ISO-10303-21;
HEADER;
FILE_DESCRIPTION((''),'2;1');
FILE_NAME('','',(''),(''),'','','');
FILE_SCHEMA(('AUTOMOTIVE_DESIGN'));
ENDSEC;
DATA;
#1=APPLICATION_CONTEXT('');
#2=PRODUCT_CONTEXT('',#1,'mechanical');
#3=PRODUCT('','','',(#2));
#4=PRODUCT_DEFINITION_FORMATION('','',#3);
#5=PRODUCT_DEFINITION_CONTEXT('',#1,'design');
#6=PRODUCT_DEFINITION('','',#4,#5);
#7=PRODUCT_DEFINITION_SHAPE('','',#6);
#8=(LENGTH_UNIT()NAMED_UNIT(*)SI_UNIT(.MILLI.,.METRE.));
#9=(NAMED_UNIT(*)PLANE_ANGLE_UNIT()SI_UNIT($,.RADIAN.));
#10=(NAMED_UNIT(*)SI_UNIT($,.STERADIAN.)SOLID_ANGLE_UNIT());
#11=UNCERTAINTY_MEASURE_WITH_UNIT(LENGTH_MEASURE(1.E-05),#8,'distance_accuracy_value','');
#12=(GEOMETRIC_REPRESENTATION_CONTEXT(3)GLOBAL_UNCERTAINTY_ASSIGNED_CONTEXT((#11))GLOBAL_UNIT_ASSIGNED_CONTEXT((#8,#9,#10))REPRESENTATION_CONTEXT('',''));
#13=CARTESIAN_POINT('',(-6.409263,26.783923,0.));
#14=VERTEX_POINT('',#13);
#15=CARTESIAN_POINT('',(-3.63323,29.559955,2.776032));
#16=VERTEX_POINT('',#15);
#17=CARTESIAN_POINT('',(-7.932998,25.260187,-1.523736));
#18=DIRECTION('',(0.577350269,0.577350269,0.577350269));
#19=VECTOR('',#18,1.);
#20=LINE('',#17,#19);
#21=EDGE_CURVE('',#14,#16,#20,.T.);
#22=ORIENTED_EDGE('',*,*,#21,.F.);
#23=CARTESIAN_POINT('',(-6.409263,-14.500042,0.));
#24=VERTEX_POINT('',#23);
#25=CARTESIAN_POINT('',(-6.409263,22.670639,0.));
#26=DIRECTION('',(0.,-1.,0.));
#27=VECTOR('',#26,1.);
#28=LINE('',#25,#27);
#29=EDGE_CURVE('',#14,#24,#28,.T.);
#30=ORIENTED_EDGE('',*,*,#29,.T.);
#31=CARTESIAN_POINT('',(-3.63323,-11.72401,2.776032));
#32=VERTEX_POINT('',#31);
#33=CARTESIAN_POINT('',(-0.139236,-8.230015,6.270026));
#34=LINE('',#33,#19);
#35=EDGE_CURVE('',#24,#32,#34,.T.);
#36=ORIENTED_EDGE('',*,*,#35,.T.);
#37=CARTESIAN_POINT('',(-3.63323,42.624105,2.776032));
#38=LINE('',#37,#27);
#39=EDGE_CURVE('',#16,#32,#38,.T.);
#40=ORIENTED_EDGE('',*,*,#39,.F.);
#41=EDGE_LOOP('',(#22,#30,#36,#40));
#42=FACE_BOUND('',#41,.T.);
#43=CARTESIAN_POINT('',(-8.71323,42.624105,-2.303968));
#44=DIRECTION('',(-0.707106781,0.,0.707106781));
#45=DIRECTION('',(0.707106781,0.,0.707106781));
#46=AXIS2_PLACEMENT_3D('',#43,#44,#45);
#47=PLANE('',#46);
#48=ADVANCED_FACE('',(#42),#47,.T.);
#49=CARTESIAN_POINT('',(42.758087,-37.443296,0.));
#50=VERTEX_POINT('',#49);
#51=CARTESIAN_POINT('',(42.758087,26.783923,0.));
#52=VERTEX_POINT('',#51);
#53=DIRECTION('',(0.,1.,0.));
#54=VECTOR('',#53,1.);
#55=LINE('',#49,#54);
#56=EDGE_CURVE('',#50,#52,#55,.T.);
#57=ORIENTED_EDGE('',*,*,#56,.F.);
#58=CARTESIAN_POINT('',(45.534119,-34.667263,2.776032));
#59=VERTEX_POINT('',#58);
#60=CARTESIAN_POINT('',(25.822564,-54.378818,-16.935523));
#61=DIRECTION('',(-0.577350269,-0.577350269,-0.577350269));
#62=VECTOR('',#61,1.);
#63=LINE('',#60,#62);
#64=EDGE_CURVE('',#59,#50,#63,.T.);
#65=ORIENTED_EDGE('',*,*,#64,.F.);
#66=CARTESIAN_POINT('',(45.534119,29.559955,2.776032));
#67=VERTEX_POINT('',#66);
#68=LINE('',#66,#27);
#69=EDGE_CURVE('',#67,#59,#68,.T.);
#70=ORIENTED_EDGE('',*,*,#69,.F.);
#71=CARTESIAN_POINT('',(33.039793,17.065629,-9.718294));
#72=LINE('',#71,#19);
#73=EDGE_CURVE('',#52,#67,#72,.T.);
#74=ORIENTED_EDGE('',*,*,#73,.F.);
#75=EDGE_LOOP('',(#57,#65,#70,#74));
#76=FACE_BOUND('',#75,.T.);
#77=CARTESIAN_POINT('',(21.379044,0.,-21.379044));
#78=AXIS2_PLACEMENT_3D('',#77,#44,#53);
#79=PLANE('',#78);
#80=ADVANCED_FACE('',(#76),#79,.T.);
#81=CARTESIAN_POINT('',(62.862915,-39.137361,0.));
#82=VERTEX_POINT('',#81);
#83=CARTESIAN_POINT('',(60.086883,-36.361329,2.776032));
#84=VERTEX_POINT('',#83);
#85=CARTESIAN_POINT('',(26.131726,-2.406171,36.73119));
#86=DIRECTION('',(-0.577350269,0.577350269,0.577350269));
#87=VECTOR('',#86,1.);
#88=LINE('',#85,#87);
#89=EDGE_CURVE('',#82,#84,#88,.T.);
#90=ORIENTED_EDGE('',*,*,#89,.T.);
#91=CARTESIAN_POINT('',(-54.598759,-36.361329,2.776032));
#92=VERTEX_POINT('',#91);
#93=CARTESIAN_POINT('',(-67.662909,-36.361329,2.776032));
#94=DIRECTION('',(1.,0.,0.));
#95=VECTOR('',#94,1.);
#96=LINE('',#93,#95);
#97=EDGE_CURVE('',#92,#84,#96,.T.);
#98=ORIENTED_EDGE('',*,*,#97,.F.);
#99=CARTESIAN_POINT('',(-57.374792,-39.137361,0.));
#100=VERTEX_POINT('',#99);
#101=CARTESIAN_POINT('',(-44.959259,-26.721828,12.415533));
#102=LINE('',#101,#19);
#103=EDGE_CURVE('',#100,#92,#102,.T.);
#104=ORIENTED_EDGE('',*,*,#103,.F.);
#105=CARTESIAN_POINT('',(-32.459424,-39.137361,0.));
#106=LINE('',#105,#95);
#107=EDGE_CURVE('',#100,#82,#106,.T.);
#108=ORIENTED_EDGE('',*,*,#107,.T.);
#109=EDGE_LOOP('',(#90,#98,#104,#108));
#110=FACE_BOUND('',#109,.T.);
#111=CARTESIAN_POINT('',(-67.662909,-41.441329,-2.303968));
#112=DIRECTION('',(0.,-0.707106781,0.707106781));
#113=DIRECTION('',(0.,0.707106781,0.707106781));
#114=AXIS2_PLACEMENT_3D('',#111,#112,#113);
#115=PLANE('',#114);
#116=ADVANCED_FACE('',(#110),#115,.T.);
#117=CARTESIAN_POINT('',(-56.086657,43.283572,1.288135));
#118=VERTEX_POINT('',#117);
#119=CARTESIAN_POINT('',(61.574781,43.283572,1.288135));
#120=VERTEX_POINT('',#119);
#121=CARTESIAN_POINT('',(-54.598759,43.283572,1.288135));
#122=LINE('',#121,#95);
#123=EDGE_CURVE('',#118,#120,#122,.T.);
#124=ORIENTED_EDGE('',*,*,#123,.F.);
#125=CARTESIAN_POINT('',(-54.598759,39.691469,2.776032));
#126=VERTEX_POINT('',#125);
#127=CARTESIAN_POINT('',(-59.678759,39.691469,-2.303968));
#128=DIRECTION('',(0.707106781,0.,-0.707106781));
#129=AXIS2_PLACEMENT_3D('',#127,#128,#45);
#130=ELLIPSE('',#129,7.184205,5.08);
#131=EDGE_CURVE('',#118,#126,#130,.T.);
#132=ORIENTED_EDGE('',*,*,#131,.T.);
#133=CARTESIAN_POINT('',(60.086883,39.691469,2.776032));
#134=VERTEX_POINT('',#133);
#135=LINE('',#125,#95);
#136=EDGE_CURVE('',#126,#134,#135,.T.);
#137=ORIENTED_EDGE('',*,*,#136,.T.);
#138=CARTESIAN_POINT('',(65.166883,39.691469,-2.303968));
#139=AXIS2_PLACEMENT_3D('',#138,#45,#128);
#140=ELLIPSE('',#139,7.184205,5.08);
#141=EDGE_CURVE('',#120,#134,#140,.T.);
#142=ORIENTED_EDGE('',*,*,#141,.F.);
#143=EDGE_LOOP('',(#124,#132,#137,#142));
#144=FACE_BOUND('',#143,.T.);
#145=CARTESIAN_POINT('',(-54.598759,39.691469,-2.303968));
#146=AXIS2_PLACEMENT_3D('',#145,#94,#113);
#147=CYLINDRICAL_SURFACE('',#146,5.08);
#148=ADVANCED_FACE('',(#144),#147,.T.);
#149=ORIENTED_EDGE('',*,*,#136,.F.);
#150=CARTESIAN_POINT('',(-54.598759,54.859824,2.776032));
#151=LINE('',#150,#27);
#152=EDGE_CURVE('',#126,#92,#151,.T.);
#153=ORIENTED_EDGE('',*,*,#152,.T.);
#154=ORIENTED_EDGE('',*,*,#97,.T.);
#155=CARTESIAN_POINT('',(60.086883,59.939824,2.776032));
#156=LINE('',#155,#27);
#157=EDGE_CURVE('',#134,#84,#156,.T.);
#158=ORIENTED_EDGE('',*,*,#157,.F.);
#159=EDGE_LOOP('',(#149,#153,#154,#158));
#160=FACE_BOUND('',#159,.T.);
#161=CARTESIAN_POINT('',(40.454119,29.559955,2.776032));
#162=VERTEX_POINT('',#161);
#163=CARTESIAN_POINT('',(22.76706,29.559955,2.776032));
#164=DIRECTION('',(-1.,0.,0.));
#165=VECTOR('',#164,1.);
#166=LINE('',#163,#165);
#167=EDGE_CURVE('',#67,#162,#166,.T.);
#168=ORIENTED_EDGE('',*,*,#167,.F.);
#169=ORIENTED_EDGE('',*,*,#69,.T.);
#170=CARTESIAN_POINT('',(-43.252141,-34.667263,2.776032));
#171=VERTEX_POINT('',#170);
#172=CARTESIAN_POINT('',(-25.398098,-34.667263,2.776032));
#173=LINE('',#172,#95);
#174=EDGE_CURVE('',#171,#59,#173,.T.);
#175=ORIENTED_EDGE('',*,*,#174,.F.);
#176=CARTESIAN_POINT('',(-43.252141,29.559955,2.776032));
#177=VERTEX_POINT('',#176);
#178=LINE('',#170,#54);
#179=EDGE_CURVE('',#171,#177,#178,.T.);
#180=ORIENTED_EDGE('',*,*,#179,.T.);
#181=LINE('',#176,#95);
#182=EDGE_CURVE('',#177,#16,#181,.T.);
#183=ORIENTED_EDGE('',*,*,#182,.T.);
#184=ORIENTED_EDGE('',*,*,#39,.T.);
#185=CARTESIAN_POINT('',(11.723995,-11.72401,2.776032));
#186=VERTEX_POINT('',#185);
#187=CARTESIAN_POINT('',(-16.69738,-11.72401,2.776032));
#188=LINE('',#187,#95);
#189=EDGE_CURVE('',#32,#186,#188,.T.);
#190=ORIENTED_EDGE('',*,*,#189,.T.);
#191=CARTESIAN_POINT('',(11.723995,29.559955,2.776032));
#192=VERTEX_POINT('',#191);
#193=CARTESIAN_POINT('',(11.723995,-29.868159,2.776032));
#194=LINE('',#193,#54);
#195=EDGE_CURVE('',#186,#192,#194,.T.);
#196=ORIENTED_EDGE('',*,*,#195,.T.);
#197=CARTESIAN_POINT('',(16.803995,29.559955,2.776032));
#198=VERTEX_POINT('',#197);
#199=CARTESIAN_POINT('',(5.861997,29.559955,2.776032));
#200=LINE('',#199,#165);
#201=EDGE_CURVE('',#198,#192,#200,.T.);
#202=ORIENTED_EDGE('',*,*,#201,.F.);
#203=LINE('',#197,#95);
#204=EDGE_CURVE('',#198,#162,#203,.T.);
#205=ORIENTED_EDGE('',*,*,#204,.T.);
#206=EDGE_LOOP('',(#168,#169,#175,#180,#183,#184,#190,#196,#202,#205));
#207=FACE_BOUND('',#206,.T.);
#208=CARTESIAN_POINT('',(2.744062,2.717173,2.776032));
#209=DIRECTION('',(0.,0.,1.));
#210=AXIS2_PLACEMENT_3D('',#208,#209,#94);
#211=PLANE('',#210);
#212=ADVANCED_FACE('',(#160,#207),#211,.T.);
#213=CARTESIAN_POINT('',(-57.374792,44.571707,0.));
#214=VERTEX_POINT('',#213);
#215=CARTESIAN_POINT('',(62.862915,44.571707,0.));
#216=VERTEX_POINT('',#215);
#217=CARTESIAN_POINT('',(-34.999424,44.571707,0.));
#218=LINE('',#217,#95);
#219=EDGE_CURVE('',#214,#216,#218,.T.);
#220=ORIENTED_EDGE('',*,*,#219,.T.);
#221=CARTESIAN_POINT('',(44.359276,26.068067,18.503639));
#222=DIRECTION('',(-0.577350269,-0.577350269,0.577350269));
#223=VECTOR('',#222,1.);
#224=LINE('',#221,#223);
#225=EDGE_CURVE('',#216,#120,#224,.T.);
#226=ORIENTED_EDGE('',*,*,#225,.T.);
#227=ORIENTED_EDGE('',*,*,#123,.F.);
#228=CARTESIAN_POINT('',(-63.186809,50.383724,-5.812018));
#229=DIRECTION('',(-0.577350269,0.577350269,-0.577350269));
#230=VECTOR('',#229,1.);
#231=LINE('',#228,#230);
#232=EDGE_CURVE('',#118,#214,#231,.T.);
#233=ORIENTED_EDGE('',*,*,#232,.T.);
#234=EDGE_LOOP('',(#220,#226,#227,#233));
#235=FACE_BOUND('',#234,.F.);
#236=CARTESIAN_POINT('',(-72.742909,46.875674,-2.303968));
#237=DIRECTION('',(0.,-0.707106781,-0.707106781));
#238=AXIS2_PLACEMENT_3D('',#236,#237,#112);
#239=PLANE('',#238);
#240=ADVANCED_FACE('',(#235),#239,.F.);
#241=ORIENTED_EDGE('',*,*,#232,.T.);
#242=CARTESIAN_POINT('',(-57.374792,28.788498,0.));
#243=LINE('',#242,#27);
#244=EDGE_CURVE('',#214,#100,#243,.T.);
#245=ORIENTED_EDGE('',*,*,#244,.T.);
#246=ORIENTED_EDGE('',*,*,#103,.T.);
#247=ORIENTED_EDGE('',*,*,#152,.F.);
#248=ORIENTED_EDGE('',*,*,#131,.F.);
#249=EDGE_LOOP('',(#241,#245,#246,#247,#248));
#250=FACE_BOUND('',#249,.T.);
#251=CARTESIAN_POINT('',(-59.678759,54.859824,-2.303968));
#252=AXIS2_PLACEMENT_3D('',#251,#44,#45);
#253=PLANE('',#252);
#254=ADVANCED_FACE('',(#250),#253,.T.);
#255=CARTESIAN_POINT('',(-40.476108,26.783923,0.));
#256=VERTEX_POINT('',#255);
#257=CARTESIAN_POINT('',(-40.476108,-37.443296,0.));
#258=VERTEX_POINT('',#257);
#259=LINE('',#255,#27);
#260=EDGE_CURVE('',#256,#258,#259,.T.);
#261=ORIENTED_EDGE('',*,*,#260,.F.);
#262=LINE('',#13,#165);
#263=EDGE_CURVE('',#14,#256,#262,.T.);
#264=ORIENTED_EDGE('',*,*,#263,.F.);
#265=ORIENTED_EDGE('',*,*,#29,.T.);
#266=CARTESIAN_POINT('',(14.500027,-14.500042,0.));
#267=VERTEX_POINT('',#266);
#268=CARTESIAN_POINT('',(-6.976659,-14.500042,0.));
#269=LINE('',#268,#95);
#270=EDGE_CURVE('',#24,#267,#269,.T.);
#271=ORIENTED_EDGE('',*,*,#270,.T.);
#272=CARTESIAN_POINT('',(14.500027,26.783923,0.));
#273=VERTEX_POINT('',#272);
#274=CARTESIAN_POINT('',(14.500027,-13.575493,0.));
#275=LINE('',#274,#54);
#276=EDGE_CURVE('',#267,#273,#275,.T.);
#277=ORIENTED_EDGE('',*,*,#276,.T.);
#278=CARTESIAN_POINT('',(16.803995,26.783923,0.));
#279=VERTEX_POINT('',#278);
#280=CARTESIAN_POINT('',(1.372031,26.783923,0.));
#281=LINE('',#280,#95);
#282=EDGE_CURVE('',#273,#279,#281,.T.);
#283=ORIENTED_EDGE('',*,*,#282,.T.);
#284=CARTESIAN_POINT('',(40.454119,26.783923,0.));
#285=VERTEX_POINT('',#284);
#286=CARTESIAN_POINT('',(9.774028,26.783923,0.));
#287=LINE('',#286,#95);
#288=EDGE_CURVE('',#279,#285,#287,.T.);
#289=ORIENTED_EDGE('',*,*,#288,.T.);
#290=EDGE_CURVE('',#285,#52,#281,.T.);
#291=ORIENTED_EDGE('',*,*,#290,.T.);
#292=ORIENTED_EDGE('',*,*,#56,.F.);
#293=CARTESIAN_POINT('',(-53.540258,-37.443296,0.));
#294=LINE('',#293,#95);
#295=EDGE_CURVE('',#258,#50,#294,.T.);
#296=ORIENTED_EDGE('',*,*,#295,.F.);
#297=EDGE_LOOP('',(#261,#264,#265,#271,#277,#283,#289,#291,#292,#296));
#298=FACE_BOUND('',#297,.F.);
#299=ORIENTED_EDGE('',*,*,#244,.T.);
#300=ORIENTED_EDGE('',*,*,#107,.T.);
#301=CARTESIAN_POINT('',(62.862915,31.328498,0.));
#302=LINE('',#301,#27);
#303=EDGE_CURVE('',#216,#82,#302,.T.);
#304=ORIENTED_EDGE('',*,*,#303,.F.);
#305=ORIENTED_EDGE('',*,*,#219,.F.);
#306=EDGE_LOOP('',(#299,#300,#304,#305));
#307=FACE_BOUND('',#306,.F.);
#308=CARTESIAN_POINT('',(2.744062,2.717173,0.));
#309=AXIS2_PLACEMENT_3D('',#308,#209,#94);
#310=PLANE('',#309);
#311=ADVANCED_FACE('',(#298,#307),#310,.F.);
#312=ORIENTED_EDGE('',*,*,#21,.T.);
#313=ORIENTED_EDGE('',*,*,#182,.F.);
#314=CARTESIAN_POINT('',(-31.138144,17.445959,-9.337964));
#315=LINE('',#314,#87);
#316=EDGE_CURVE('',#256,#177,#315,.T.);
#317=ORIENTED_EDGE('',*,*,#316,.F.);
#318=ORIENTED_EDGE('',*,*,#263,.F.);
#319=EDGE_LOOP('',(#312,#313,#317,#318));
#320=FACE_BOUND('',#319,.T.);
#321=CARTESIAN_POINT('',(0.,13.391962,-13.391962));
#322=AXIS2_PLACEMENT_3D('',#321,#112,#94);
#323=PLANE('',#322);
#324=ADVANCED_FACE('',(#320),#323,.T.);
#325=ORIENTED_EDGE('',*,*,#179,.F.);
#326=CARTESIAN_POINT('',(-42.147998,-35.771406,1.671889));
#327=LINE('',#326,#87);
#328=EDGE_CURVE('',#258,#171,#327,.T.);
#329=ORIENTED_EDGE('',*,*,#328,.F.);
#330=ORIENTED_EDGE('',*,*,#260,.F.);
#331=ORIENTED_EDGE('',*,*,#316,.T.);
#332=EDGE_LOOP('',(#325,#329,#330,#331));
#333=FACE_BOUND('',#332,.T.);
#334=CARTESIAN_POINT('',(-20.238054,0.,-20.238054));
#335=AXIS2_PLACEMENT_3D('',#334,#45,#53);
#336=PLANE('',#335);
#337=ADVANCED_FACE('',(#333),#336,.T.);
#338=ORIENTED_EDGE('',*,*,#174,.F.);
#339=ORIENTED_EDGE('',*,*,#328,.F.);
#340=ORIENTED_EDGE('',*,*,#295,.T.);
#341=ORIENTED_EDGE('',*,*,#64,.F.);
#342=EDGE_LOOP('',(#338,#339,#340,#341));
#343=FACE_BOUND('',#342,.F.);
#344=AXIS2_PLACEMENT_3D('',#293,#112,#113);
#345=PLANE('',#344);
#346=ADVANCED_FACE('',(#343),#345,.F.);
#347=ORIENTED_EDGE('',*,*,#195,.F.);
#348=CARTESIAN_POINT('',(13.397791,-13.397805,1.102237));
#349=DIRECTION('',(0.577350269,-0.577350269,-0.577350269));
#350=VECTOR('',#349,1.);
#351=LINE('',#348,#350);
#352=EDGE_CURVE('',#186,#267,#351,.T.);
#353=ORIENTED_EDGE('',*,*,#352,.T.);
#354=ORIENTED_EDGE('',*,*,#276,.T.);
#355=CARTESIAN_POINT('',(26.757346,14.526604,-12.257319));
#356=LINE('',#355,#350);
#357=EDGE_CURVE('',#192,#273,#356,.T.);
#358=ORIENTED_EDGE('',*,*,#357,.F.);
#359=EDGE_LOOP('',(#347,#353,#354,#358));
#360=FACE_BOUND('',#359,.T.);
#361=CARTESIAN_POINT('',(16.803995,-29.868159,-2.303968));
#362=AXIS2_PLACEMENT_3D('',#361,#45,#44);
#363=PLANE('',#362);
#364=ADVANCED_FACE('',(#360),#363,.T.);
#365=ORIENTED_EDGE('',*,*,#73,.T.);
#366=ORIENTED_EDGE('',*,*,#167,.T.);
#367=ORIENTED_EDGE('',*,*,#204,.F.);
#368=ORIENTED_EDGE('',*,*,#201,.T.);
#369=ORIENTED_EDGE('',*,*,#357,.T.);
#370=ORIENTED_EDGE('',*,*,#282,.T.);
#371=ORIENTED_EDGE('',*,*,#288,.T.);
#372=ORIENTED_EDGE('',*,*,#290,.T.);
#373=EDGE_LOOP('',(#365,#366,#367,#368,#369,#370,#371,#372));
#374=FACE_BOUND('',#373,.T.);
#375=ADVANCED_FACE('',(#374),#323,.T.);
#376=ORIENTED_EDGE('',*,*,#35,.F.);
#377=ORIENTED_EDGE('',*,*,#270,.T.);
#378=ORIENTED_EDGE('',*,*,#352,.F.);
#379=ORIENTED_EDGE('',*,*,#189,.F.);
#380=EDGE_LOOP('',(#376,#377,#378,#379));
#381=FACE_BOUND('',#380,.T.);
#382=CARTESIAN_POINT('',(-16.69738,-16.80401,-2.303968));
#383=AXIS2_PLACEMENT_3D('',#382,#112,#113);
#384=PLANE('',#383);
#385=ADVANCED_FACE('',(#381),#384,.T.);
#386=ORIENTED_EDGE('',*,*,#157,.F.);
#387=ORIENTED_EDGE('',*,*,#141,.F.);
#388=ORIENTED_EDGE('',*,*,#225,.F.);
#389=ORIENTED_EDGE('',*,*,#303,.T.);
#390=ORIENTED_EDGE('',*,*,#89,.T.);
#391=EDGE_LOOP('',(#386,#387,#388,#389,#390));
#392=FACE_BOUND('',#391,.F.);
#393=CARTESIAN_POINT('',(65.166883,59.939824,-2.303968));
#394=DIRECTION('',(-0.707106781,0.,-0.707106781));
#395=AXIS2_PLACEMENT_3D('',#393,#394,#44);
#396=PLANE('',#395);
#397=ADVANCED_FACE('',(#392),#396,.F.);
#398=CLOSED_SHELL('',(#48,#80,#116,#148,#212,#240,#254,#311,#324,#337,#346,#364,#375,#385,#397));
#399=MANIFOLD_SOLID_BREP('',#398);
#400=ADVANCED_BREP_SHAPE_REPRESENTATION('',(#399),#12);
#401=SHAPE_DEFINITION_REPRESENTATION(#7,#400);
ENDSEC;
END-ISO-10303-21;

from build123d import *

# Parameters (mm, degrees)
F0_W         = 124.8456425965
F0_H         = 88.3170031011
F1_DEPTH     = 2.7760323137
F2_T1_DEPTH  = 114.4453022588
F3_T1_DEPTH  = 145.8939417542
F4_T1_DEPTH  = 109.3653022588
F5_T1_DEPTH  = 140.8139417542
F6_R         = 5.08
F7_T1_DEPTH  = 56.8432509899
F8_T1_DEPTH  = 23.6501246691
F9_T4_DEPTH  = 47.6030598057
F10_T4_DEPTH = 72.4922642685
F11_T4_DEPTH = 72.4922642685
F12_T4_DEPTH = 74.9874005688
F13_T1_DEPTH = 41.4855244232
F14_T4_DEPTH = 109.3624946917


# Not quite as in the source:
# - a fillet or chamfer that OpenCascade refuses, or shapes differently, is made with other operations: its cross-section is extruded or revolved along the edge and cut away or added


with BuildPart() as f1:
    # F0 (on Top) → F1 (new body)
    with BuildSketch(Plane.XY):
        with Locations((2.7440618724, 2.717172727)):
            Rectangle(F0_W, F0_H)
        Polygon((-38.1721407175, -32.3632955551), (-38.1721407175, 24.4799554348), (-8.7132304907, 24.4799554348), (-8.7132304907, -16.804009676), (16.8039947748, -16.804009676), (16.8039947748, 24.4799554348), (40.4541194439, 24.4799554348), (40.4541194439, -32.3632955551), align=None, mode=Mode.SUBTRACT)
    extrude(amount=F1_DEPTH)

    # F2: chamfer of 5.08 on 1 edges, made by hand

    # F2_s2 → F2_t1 (cut)
    with BuildSketch(Plane.XZ.offset(-59.9398238564)):
        Polygon((65.1668831706, -2.3039676863), (60.0868831706, 2.7760323137), (65.1668831706, 2.7760323137), align=None)
    extrude(amount=F2_T1_DEPTH, mode=Mode.SUBTRACT)

    # F3: chamfer of 5.08 on 1 edges, made by hand

    # F3_s2 → F3_t1 (cut)
    with BuildSketch(Plane.YZ.offset(-72.7429090047)):
        Polygon((46.8756742775, -2.3039676863), (41.7956742775, 2.7760323137), (46.8756742775, 2.7760323137), align=None)
    extrude(amount=F3_T1_DEPTH, mode=Mode.SUBTRACT)

    # F4: chamfer of 5.08 on 1 edges, made by hand

    # F4_s2 → F4_t1 (cut)
    with BuildSketch(Plane.XZ.offset(-54.8598238564)):
        Polygon((-59.6787594259, -2.3039676863), (-54.5987594259, 2.7760323137), (-59.6787594259, 2.7760323137), align=None)
    extrude(amount=F4_T1_DEPTH, mode=Mode.SUBTRACT)

    # F5: chamfer of 5.08 on 1 edges, made by hand

    # F5_s2 → F5_t1 (cut)
    with BuildSketch(Plane.YZ.offset(-67.6629090048)):
        Polygon((-41.4413288236, -2.3039676863), (-36.3613288236, 2.7760323137), (-41.4413288236, 2.7760323137), align=None)
    extrude(amount=F5_T1_DEPTH, mode=Mode.SUBTRACT)

    # F6
    f6_edges = [f1.edges().sort_by_distance(p)[0] for p in [
        (2.744062, 41.795674, 2.776032),
    ]]
    fillet(f6_edges, radius=F6_R)

    # F7: chamfer of 5.08 on 1 edges, made by hand

    # F7_s2 → F7_t1 (cut)
    with BuildSketch(Plane.XZ.offset(-24.4799554348)):
        Polygon((-43.2521407175, 2.7760323137), (-38.1721407175, -2.3039676863), (-38.1721407175, 2.7760323137), align=None)
    extrude(amount=F7_T1_DEPTH, mode=Mode.SUBTRACT)

    # F8: chamfer of 5.08 on 1 edges, made by hand

    # F8_s2 → F8_t1 (cut)
    with BuildSketch(Plane.YZ.offset(16.8039947748)):
        Polygon((24.4799554348, -2.3039676863), (29.5599554348, 2.7760323137), (24.4799554348, 2.7760323137), align=None)
    extrude(amount=F8_T1_DEPTH, mode=Mode.SUBTRACT)

    # F9: chamfer of 5.08 on 1 edges, made by hand


with BuildPart() as f9_tool2:
    # F9_s3 → F9_t4 (new body)
    with BuildSketch(Plane.YZ.offset(-56.3162902964)):
        Polygon((24.4799554348, -2.3039676863), (29.5599554348, 2.7760323137), (24.4799554348, 2.7760323137), align=None)
    extrude(amount=F9_T4_DEPTH)

    split(bisect_by=Plane(origin=(-20.2380542019, 0, -20.2380542019), x_dir=(0, 1, 0), z_dir=(0.7071067812, 0, 0.7071067812)), keep=Keep.TOP)


with BuildPart() as f1_1:
    add(f1.part)

    # F9_t1: cut F9_tool2
    add(f9_tool2.part, mode=Mode.SUBTRACT)

    # F10: chamfer of 5.08 on 1 edges, made by hand


with BuildPart() as f10_tool2:
    # F10_s3 → F10_t4 (new body)
    with BuildSketch(Plane.XZ.offset(-42.6241050137)):
        Polygon((-8.7132304907, -2.3039676863), (-3.6332304907, 2.7760323137), (-8.7132304907, 2.7760323137), align=None)
    extrude(amount=F10_T4_DEPTH)

    split(bisect_by=Plane(origin=(0, 13.3919615606, -13.3919615605), x_dir=(1, 0, 0), z_dir=(0, -0.7071067812, 0.7071067812)), keep=Keep.TOP)


with BuildPart() as f1_2:
    add(f1_1.part)

    # F10_t1: cut F10_tool2
    add(f10_tool2.part, mode=Mode.SUBTRACT)

    # F11: chamfer of 5.08 on 1 edges, made by hand


with BuildPart() as f11_tool2:
    # F11_s3 → F11_t4 (new body)
    with BuildSketch(Plane.XZ.offset(29.8681592548)):
        Polygon((16.8039947748, -2.3039676863), (11.7239947748, 2.7760323137), (16.8039947748, 2.7760323137), align=None)
    extrude(amount=-F11_T4_DEPTH)

    split(bisect_by=Plane(origin=(0, 13.3919615606, -13.3919615606), x_dir=(1, 0, 0), z_dir=(0, -0.7071067812, 0.7071067812)), keep=Keep.TOP)


with BuildPart() as f1_3:
    add(f1_2.part)

    # F11_t1: cut F11_tool2
    add(f11_tool2.part, mode=Mode.SUBTRACT)

    # F12: chamfer of 5.08 on 1 edges, made by hand


with BuildPart() as f12_tool2:
    # F12_s3 → F12_t4 (new body)
    with BuildSketch(Plane.XZ.offset(-42.6241050137)):
        Polygon((40.4541194439, -2.3039676863), (45.5341194439, 2.7760323137), (40.4541194439, 2.7760323137), align=None)
    extrude(amount=F12_T4_DEPTH)

    split(bisect_by=Plane(origin=(0, 13.3919615606, -13.3919615606), x_dir=(1, 0, 0), z_dir=(0, -0.7071067812, 0.7071067812)), keep=Keep.TOP)


with BuildPart() as f1_4:
    add(f1_3.part)

    # F12_t1: cut F12_tool2
    add(f12_tool2.part, mode=Mode.SUBTRACT)

    # F13: chamfer of 5.08 on 1 edges, made by hand

    # F13_s2 → F13_t1 (cut)
    with BuildSketch(Plane.YZ.offset(-16.6973800696)):
        Polygon((-16.804009676, -2.3039676863), (-11.724009676, 2.7760323137), (-16.804009676, 2.7760323137), align=None)
    extrude(amount=F13_T1_DEPTH, mode=Mode.SUBTRACT)

    # F14: chamfer of 5.08 on 1 edges, made by hand


with BuildPart() as f14_tool2:
    # F14_s3 → F14_t4 (new body)
    with BuildSketch(Plane.YZ.offset(-53.5402579827)):
        Polygon((-37.4432955551, 0), (-32.3632955551, 5.08), (-32.3632955551, 0), align=None)
    extrude(amount=F14_T4_DEPTH)

    split(bisect_by=Plane(origin=(-20.2380542019, 0, -20.2380542019), x_dir=(0, 1, 0), z_dir=(0.7071067812, 0, 0.7071067812)), keep=Keep.TOP)

    split(bisect_by=Plane(origin=(21.3790435651, 0, -21.3790435651), x_dir=(0, 1, 0), z_dir=(-0.7071067812, 0, 0.7071067812)), keep=Keep.TOP)


with BuildPart() as f1_5:
    add(f1_4.part)

    # F14_t1: cut F14_tool2
    add(f14_tool2.part, mode=Mode.SUBTRACT)


solid = f1_5.part
